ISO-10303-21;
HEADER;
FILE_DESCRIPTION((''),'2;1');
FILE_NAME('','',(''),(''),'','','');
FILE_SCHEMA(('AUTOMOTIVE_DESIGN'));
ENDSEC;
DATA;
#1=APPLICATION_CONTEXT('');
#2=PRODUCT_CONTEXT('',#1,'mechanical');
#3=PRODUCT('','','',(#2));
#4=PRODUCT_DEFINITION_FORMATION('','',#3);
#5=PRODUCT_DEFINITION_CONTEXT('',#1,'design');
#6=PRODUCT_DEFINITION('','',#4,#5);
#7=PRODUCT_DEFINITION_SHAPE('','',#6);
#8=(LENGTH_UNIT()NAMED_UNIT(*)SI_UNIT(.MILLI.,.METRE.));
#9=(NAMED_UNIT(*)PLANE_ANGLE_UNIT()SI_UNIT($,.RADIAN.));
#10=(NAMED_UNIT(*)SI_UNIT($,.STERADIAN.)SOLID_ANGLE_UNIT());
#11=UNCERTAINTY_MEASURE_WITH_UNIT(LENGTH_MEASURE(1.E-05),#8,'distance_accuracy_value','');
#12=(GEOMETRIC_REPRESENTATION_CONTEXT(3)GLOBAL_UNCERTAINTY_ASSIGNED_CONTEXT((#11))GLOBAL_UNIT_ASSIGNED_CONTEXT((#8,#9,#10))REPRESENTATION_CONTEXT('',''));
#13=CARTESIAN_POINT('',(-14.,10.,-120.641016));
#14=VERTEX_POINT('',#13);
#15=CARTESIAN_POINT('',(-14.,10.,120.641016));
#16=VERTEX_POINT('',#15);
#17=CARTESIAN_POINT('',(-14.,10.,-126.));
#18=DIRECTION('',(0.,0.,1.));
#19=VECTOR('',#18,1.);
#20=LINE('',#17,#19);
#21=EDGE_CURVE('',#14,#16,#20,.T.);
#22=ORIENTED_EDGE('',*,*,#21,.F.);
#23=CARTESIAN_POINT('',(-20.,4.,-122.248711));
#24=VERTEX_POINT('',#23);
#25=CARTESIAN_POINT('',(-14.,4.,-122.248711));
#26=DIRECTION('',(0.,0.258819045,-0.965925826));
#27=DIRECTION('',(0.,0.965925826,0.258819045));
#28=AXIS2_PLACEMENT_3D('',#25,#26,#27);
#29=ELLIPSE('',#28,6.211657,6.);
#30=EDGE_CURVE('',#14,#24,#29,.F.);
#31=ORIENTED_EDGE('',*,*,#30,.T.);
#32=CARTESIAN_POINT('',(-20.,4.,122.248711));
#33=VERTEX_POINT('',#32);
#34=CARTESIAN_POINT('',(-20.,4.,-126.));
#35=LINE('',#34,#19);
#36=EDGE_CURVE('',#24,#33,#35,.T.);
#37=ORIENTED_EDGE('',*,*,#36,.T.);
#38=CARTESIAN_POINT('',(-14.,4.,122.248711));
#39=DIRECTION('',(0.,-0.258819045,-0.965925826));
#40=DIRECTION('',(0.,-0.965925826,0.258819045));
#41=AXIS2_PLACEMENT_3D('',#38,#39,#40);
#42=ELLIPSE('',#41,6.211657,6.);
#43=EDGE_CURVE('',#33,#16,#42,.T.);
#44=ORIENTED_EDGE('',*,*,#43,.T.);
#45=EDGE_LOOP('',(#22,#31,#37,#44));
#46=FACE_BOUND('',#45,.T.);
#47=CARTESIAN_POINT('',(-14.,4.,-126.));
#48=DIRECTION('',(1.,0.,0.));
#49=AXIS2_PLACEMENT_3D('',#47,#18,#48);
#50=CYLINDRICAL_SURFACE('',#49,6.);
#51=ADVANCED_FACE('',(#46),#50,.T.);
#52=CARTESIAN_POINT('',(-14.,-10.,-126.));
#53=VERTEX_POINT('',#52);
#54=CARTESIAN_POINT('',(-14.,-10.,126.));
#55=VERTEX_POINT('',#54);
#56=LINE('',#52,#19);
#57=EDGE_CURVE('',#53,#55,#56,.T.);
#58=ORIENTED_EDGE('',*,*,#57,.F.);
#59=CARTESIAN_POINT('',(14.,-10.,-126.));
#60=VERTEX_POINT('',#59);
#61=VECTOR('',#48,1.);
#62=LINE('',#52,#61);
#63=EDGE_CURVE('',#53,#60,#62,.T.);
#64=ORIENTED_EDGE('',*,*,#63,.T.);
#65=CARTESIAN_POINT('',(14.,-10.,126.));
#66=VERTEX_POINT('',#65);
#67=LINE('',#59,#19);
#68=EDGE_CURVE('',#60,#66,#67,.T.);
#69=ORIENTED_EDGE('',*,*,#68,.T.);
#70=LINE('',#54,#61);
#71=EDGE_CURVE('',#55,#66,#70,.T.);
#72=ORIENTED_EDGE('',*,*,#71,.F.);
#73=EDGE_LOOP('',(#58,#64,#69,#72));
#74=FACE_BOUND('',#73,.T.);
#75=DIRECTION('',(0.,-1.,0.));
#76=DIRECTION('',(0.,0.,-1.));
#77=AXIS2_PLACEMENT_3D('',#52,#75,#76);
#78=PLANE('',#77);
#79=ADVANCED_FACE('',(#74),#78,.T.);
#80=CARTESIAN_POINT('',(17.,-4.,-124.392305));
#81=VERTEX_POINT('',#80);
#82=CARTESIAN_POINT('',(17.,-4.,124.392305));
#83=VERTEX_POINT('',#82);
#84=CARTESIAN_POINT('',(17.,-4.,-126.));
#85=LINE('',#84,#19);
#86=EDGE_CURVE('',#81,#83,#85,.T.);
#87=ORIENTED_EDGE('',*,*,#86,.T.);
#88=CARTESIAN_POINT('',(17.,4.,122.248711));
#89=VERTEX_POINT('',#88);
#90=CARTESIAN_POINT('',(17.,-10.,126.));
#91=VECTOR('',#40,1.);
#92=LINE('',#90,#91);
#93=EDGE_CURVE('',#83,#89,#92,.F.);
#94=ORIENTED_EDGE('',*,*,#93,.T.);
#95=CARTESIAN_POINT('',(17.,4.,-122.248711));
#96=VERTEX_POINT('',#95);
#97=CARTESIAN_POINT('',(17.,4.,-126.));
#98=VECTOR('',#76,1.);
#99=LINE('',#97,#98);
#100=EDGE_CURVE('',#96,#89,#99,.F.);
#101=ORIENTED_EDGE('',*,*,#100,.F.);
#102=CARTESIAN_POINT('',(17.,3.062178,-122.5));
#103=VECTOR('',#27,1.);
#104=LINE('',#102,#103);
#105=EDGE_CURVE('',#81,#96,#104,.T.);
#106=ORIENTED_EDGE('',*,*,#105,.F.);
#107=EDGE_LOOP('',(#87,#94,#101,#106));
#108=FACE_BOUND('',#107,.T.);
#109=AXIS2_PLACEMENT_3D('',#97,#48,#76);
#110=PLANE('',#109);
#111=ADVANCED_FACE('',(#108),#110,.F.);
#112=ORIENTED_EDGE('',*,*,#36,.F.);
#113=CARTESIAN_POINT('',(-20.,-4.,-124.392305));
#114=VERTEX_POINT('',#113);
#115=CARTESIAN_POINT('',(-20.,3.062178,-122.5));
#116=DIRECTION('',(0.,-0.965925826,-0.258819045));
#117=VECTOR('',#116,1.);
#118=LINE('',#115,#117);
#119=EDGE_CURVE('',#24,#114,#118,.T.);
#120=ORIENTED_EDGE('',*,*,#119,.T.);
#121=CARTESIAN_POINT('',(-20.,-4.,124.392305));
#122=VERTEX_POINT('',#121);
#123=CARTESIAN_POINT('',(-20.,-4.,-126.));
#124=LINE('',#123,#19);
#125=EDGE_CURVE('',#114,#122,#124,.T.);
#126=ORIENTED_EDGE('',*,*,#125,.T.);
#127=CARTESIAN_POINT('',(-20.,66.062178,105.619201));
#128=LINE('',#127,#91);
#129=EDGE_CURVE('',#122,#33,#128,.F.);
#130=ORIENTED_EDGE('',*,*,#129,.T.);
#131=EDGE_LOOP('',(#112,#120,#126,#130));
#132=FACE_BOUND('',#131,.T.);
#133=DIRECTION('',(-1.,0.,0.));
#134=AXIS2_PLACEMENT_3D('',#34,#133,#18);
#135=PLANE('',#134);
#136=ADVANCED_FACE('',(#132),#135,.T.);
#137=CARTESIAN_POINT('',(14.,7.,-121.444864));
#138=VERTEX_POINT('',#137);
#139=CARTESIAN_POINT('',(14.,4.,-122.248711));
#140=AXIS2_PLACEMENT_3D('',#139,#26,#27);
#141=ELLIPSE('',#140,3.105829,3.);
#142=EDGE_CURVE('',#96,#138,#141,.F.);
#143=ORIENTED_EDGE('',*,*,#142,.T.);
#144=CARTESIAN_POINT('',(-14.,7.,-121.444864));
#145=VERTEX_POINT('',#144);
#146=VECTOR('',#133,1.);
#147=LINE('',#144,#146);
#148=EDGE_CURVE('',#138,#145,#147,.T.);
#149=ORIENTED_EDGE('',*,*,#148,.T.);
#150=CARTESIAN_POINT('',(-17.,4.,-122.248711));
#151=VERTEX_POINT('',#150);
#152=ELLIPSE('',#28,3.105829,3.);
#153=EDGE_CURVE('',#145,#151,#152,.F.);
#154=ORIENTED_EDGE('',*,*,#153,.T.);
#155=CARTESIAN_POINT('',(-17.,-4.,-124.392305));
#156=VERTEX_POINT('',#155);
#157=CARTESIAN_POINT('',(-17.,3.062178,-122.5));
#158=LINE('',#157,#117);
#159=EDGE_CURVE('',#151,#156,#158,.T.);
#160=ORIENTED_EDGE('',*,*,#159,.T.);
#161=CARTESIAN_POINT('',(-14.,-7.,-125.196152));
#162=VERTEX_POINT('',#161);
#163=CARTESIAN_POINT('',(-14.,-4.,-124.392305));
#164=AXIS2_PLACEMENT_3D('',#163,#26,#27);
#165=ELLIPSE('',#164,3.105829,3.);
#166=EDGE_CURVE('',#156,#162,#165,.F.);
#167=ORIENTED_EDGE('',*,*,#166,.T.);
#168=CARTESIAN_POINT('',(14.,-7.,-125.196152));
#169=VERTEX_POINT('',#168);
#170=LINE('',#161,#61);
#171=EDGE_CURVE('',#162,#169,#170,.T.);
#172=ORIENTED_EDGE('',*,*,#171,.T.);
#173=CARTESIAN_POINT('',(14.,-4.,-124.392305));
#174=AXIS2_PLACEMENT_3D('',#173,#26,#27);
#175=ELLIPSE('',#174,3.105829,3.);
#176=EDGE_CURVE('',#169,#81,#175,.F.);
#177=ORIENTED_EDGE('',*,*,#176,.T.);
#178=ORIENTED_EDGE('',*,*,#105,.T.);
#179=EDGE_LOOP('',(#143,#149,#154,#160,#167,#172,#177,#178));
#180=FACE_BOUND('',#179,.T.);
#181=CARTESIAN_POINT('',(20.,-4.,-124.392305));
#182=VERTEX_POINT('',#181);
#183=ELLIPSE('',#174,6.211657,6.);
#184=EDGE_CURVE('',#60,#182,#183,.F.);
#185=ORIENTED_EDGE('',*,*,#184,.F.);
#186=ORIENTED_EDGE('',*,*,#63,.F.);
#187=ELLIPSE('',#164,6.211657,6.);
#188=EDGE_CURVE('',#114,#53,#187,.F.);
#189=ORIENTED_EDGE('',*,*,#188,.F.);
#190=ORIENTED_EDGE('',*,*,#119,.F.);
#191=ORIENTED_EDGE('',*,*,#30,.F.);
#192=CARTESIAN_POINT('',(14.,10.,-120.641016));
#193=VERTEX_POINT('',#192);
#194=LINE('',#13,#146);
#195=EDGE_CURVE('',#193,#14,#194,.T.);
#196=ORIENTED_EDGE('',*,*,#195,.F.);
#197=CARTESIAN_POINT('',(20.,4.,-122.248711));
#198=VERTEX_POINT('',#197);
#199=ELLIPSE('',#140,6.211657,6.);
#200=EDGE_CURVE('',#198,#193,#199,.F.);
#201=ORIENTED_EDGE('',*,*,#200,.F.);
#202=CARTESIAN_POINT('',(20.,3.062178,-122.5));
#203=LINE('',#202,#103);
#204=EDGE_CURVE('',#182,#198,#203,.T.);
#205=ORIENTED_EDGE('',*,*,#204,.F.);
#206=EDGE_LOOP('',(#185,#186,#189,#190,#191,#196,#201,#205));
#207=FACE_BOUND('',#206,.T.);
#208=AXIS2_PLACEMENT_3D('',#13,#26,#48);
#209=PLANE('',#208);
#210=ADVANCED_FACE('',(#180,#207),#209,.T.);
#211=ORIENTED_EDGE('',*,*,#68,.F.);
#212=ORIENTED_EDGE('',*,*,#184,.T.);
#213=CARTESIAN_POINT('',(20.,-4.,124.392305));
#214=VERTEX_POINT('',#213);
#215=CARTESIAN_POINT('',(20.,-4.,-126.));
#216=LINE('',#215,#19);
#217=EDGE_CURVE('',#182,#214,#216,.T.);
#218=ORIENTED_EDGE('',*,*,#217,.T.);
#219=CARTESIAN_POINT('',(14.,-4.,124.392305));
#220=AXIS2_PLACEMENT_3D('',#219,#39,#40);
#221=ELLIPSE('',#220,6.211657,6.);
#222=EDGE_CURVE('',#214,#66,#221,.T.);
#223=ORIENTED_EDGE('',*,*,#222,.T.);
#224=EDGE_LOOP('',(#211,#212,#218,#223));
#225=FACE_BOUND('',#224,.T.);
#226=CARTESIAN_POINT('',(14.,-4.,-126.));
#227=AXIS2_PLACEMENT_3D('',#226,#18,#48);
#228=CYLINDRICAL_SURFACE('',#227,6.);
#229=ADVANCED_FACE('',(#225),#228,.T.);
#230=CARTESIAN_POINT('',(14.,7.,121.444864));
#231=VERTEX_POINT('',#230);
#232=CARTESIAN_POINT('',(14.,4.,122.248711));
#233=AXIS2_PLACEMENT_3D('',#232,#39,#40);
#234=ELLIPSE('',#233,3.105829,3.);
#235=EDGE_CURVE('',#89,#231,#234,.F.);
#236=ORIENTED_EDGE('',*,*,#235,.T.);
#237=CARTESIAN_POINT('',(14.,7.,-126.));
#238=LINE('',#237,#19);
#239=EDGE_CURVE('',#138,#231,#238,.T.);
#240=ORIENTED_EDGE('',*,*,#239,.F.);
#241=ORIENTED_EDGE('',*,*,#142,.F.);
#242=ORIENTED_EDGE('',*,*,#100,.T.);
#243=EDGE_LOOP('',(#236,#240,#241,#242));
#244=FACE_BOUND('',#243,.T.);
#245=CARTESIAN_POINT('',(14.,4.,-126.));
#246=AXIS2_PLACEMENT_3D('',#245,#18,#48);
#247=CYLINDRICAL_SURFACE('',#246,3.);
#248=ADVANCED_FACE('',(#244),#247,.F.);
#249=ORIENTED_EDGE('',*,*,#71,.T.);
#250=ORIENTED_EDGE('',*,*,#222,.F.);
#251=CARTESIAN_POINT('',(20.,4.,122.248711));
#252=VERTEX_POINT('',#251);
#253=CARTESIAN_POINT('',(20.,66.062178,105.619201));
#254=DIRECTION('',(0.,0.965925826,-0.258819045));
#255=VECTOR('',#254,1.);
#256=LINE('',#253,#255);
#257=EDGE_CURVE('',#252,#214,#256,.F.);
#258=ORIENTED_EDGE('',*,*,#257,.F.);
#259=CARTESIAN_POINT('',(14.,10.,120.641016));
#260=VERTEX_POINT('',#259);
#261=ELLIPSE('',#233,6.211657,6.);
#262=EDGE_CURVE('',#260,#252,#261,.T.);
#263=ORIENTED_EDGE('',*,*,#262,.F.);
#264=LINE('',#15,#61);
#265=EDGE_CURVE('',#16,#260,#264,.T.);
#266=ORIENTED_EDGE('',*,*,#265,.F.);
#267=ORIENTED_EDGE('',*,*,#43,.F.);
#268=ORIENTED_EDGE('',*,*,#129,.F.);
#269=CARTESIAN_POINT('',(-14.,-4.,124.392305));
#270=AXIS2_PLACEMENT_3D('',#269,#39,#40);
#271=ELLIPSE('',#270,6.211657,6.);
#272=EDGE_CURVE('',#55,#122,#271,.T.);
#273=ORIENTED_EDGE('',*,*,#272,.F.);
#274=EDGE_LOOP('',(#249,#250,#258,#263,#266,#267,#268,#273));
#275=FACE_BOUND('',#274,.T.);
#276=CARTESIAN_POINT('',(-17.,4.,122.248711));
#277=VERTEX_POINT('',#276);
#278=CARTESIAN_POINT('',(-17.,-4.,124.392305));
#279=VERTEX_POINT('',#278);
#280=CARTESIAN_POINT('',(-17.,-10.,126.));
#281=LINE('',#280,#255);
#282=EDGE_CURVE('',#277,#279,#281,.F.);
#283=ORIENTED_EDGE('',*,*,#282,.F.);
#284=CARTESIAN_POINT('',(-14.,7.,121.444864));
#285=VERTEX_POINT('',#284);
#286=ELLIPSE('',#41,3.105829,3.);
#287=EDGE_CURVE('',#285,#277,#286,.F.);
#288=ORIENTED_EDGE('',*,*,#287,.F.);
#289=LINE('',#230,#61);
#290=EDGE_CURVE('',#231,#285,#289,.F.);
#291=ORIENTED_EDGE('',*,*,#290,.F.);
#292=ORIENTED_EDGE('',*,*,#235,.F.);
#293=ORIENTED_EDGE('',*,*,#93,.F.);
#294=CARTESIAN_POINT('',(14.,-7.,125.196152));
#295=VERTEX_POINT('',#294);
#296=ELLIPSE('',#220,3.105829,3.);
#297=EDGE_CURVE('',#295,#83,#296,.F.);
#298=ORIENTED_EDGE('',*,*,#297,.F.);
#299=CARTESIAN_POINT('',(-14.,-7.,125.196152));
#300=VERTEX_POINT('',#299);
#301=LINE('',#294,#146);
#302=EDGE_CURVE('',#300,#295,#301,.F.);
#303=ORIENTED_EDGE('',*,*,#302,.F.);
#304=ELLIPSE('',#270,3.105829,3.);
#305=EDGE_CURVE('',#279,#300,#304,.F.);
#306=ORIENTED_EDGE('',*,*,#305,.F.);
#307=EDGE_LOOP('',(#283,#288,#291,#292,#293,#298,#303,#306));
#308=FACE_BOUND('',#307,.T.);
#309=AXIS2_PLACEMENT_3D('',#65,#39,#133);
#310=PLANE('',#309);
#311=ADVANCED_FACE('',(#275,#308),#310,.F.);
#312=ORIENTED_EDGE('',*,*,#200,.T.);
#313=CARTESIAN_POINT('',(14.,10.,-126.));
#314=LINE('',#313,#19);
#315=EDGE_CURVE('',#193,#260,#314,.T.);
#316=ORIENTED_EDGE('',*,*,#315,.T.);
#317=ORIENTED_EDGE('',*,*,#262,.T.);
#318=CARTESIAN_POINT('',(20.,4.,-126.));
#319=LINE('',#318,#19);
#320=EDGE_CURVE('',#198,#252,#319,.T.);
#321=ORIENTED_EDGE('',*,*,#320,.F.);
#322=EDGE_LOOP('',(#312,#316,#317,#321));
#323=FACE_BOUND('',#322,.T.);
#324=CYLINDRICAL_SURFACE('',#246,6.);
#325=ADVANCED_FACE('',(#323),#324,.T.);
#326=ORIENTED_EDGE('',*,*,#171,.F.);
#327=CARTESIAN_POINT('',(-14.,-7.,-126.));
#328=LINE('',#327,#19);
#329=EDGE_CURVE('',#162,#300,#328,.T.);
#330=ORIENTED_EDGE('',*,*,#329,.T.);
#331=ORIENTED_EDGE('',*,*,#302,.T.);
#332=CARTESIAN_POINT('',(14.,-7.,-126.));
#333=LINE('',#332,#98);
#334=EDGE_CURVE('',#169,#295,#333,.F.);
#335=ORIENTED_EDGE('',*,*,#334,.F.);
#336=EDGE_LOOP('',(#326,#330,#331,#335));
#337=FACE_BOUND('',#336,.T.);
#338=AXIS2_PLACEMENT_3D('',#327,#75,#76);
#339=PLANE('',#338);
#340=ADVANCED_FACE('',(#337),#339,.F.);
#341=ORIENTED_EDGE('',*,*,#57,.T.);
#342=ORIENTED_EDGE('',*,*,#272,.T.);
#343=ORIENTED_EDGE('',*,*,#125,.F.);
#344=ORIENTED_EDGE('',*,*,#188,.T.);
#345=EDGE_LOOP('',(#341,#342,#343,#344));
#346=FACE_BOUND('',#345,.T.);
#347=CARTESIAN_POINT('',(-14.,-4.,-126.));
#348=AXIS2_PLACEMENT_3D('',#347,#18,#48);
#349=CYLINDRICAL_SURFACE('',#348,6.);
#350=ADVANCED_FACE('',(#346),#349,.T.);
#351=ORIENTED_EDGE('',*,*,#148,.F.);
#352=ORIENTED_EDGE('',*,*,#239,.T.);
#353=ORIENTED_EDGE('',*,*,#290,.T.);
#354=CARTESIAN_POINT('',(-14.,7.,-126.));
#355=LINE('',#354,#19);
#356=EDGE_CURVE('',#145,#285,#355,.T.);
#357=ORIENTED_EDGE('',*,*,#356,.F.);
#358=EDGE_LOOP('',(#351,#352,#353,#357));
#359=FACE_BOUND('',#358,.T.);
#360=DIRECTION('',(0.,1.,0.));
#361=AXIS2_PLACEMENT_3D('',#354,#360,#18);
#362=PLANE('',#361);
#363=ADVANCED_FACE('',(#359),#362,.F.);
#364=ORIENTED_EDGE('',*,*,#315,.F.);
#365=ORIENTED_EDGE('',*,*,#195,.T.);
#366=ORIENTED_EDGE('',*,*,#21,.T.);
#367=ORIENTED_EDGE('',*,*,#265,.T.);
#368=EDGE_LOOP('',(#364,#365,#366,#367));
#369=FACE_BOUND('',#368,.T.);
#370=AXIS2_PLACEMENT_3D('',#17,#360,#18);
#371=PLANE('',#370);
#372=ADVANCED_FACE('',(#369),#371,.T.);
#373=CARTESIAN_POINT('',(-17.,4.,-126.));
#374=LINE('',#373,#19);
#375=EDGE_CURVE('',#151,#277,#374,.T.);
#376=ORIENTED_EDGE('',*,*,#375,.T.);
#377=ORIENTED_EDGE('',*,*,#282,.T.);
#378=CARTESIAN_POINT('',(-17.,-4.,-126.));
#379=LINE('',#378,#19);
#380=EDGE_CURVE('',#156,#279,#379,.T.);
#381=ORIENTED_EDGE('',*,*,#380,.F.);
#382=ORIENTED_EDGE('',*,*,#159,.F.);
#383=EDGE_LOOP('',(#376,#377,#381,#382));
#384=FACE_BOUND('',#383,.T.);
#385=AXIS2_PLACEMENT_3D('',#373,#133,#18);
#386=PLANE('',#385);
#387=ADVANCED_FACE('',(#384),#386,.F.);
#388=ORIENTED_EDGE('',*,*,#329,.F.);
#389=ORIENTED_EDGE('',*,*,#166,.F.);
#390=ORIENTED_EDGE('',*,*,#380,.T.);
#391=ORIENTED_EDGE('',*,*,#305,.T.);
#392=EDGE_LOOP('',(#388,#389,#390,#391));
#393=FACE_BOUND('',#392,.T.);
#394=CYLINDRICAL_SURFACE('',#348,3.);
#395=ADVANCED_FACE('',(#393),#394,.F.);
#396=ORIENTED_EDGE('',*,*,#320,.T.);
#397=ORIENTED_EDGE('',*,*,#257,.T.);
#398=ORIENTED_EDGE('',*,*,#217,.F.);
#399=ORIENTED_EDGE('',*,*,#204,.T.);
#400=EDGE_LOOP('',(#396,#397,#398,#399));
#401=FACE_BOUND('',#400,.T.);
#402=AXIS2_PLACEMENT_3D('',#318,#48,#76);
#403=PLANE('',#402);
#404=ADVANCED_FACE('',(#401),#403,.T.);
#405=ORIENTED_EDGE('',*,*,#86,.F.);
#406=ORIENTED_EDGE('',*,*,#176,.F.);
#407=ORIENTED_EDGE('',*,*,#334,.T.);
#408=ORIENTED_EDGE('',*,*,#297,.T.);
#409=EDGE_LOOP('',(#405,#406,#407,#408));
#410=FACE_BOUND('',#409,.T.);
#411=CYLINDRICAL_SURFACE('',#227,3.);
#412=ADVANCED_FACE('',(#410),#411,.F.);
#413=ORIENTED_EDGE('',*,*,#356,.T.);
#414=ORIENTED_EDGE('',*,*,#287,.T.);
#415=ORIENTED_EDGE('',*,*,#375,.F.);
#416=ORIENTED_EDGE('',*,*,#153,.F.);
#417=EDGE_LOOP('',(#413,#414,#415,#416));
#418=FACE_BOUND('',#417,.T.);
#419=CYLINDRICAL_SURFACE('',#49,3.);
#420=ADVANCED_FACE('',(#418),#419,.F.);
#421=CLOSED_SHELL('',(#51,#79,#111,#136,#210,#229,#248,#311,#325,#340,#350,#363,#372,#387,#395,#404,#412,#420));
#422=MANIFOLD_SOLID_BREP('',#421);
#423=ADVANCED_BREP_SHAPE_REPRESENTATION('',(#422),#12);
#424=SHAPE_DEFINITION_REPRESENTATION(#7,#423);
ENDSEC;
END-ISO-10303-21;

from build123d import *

# Parameters (mm, degrees)
EXTRUDE_1_DEPTH      = 126
EXTRUDE_1_DEPTH_BACK = 126
SHELL_1_T            = -3
CHAMFER_1_SIZE       = 5.358983849
CHAMFER_1_SIZE_2     = 20


with BuildPart() as part:
    # Эскиз1 → Бобышка-Вытянуть1 (new, two sides: drawn at the far end of the back side and taken through both)
    with BuildSketch(Plane.XY.offset(-EXTRUDE_1_DEPTH_BACK)):
        with BuildLine():
            Line((-14, 10), (14, 10))
            ThreePointArc((14, 10), (18.242640687, 8.242640687), (20, 4))
            Line((20, 4), (20, -4))
            ThreePointArc((20, -4), (18.242640687, -8.242640687), (14, -10))
            Line((14, -10), (-14, -10))
            ThreePointArc((-14, -10), (-18.242640687, -8.242640687), (-20, -4))
            Line((-20, -4), (-20, 4))
            ThreePointArc((-20, 4), (-18.242640687, 8.242640687), (-14, 10))
        make_face()
    extrude(amount=EXTRUDE_1_DEPTH + EXTRUDE_1_DEPTH_BACK)

    # Оболочка1
    shell_1_openings = [part.faces().sort_by_distance(p)[0] for p in [
        (0, 0, -126),
        (0, 0, 126),
    ]]
    offset(amount=SHELL_1_T, openings=shell_1_openings, kind=Kind.INTERSECTION)

    # Фаска1
    # the kernel refuses this chamfer: 20, 5.358983849 mm, written as the material it takes off along each edge
    with BuildSketch(Plane(origin=(-65.934431404, 10, -126), x_dir=(0, 0.13751244702128945, 0.9905000388259543), z_dir=(1, 0, 0))) as chamfer_1_piece_1:
        Polygon((CHAMFER_1_SIZE * 0.990500038756, CHAMFER_1_SIZE * 0.137512447012), (-CHAMFER_1_SIZE_2 * 0.137512447021, CHAMFER_1_SIZE_2 * 0.990500038826), (0, 0), align=None)
    extrude(amount=131.868862808, mode=Mode.SUBTRACT)
    with BuildSketch(Plane(origin=(-65.934431404, 10, 126), x_dir=(0, 0.13751244702128945, -0.9905000388259543), z_dir=(1, 0, 0))) as chamfer_1_piece_2:
        Polygon((CHAMFER_1_SIZE * 0.990500038756, -CHAMFER_1_SIZE * 0.137512447012), (-CHAMFER_1_SIZE_2 * 0.137512447021, -CHAMFER_1_SIZE_2 * 0.990500038826), (0, 0), align=None)
    extrude(amount=131.868862808, mode=Mode.SUBTRACT)


solid = part.part
